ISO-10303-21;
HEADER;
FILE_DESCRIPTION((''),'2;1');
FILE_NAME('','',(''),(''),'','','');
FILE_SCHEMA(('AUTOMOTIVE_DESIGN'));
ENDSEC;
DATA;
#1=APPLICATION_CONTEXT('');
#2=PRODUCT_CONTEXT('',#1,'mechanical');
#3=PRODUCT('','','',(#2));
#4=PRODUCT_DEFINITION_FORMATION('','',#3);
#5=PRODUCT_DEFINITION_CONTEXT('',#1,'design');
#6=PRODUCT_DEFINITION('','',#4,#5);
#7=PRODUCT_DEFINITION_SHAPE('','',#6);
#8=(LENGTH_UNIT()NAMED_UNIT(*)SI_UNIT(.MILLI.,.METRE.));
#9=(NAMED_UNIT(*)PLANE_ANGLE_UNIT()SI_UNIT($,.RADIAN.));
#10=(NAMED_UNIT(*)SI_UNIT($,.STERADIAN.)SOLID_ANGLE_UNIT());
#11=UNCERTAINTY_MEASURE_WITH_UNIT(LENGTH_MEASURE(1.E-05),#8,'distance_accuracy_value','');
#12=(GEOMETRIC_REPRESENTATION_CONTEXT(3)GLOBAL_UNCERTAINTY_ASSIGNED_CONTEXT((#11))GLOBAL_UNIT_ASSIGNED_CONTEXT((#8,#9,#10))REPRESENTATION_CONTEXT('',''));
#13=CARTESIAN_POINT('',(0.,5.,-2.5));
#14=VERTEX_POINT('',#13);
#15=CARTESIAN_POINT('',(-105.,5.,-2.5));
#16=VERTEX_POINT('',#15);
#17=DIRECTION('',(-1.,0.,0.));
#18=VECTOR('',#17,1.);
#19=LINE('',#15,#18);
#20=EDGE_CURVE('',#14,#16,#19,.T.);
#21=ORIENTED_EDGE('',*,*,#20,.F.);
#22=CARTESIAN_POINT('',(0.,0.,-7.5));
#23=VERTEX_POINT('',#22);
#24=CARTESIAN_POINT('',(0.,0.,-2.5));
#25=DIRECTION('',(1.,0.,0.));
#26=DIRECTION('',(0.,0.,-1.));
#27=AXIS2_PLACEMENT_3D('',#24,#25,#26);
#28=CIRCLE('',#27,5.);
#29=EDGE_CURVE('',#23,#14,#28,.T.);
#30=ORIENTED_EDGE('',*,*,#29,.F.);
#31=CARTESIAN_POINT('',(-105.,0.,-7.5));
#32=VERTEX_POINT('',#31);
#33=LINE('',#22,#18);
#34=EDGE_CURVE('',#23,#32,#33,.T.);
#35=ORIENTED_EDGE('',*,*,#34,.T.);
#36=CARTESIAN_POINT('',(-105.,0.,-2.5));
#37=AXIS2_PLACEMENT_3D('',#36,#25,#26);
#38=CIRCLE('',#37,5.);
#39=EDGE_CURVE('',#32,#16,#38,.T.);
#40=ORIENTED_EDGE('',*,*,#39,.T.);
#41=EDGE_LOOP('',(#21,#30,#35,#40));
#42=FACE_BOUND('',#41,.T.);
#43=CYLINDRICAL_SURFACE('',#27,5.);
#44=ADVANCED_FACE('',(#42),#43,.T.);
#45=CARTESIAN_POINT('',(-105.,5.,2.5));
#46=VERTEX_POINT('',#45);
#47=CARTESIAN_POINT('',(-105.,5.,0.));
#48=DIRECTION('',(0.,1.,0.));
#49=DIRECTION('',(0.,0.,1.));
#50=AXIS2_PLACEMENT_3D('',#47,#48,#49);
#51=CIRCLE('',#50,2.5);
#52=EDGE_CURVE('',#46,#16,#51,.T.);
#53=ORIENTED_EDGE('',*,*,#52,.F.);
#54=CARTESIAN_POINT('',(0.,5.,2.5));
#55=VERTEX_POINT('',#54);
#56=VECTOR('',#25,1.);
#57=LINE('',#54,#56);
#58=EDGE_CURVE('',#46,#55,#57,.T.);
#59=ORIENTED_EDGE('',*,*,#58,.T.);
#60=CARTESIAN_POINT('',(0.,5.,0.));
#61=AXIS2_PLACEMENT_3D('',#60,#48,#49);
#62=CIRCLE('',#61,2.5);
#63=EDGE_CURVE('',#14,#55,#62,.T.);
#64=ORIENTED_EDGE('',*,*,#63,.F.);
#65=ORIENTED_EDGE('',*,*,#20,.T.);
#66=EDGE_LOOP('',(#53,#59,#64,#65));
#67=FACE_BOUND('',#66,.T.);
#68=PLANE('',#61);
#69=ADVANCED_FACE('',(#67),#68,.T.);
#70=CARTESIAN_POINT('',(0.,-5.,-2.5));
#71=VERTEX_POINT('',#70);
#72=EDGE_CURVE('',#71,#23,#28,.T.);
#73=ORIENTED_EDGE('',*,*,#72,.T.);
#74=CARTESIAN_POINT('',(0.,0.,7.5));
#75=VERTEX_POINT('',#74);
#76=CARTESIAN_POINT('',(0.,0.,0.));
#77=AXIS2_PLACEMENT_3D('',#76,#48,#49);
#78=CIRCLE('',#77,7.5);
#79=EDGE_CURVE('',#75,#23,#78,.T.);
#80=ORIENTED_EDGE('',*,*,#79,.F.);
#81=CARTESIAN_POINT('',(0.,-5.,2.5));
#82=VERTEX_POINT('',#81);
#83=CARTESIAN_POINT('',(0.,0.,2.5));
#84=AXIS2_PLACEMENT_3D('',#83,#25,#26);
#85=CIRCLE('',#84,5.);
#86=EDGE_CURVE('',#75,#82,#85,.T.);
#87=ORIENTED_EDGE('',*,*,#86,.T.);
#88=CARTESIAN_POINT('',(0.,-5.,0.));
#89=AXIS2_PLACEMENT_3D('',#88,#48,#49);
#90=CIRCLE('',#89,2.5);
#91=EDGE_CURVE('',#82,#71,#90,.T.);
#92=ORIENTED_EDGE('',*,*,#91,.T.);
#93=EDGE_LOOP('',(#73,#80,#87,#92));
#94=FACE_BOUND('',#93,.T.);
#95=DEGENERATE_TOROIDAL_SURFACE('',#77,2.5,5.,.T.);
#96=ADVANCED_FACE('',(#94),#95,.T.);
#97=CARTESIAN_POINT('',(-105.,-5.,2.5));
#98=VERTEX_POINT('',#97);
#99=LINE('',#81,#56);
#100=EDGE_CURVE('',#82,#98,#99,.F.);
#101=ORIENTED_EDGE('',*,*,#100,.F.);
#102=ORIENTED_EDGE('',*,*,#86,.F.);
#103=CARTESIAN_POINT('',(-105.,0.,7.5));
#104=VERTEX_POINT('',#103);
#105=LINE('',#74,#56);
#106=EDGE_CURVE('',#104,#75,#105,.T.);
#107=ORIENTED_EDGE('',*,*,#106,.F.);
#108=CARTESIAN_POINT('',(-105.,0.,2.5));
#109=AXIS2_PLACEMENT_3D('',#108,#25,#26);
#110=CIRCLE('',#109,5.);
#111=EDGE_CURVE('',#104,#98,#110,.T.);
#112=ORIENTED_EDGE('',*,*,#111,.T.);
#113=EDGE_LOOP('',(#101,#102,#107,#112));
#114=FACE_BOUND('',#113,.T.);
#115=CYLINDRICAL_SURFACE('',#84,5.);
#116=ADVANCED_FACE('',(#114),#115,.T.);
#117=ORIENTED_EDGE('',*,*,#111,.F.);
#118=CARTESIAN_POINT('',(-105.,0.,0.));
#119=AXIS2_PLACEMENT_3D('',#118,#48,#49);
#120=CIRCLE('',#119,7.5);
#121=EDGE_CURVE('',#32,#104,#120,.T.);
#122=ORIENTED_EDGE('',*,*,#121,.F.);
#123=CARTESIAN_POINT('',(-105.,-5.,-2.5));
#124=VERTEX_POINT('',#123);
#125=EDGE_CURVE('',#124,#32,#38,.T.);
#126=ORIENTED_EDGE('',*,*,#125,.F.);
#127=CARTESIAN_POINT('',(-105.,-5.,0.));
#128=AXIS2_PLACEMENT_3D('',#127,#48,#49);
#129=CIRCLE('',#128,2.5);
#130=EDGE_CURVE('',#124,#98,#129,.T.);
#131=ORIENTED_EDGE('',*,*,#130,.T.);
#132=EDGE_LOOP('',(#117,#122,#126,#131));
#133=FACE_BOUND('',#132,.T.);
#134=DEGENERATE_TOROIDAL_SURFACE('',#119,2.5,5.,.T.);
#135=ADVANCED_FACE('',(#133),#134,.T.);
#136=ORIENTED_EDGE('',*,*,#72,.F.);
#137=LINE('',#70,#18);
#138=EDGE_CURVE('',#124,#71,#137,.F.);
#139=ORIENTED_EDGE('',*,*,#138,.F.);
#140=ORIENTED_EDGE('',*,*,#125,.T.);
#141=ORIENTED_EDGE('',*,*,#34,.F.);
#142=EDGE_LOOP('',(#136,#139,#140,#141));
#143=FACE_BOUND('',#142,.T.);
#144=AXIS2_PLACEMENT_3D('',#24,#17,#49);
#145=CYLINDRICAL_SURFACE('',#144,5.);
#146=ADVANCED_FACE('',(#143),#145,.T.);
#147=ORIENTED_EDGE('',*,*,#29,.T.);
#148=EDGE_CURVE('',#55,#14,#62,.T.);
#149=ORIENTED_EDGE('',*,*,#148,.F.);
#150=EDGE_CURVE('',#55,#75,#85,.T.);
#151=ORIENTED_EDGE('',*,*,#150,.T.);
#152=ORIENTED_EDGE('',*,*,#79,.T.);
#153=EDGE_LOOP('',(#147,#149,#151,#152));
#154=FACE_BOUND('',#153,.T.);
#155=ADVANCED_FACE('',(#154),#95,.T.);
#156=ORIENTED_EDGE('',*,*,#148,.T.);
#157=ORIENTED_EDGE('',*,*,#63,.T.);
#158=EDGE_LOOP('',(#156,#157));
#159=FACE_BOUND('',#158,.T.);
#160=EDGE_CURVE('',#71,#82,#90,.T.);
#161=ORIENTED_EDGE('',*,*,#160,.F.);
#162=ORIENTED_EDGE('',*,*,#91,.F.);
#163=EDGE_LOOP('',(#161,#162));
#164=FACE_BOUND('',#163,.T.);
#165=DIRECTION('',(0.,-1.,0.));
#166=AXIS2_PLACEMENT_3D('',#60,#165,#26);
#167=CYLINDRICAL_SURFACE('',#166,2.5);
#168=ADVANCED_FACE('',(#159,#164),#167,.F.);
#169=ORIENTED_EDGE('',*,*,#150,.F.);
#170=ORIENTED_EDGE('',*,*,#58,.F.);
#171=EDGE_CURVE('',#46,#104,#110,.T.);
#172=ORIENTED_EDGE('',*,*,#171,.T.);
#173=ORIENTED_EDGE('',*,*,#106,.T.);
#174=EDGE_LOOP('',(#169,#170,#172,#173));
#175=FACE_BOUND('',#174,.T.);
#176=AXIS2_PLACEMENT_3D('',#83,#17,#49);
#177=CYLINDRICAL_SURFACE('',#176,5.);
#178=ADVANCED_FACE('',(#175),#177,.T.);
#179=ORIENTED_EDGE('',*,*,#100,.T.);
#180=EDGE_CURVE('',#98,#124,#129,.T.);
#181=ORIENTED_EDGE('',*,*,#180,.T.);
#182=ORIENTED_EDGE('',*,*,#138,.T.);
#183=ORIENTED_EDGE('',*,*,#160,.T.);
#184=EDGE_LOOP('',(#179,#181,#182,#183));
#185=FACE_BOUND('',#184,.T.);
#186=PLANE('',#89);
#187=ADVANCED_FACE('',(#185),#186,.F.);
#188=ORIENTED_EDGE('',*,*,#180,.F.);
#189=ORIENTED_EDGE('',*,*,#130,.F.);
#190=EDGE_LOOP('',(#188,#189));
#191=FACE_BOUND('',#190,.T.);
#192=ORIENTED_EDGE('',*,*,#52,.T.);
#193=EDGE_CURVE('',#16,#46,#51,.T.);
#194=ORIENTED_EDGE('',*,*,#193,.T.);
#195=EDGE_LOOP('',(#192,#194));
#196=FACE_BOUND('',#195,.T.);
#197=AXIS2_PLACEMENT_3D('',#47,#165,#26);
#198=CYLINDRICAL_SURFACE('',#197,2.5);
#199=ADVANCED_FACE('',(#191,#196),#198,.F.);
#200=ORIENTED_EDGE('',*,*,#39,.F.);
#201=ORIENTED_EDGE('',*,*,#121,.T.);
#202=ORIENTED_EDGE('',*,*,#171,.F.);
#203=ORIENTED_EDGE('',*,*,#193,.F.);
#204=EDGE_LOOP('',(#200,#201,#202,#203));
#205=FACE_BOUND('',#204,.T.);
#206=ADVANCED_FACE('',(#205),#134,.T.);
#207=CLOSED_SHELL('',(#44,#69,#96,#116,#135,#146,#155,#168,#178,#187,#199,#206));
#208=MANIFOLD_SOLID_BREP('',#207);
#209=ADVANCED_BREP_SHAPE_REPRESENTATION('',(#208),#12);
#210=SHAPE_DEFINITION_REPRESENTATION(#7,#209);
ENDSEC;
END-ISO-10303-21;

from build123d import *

# Parameters (mm, degrees)
CROQUIS1_R              = 2.5
SALIENTE_EXTRUIR1_DEPTH = 5
REDONDEO1_R             = 5


with BuildPart() as part:
    # Croquis1 → Saliente-Extruir1 (new, symmetric)
    with BuildSketch(Plane(origin=(0, 0, 0), x_dir=(-1, 0, 0), z_dir=(0, 1, 0))):
        with BuildLine():
            Line((0, 7.5), (105, 7.5))
            ThreePointArc((105, 7.5), (112.5, 0), (105, -7.5))
            Line((105, -7.5), (0, -7.5))
            ThreePointArc((0, -7.5), (-7.5, 0), (0, 7.5))
        make_face()
        with Locations(Location((0, 0, 0), (0, 0, 90))):
            Circle(CROQUIS1_R, mode=Mode.SUBTRACT)
        with Locations(Location((105, 0, 0), (0, 0, 90))):
            Circle(CROQUIS1_R, mode=Mode.SUBTRACT)
    extrude(amount=SALIENTE_EXTRUIR1_DEPTH, both=True)

    # Redondeo1
    redondeo1_edges = [part.edges().sort_by_distance(p)[0] for p in [
        (7.5, 5, 0),
        (-52.5, 5, 7.5),
        (-112.5, 5, 0),
        (7.5, -5, 0),
        (-52.5, -5, 7.5),
        (-112.5, -5, 0),
        (-52.5, 5, -7.5),
        (-52.5, -5, -7.5),
    ]]
    fillet(redondeo1_edges, radius=REDONDEO1_R - 0.0001)  # a hair under: the kernel refuses the full size


solid = part.part
